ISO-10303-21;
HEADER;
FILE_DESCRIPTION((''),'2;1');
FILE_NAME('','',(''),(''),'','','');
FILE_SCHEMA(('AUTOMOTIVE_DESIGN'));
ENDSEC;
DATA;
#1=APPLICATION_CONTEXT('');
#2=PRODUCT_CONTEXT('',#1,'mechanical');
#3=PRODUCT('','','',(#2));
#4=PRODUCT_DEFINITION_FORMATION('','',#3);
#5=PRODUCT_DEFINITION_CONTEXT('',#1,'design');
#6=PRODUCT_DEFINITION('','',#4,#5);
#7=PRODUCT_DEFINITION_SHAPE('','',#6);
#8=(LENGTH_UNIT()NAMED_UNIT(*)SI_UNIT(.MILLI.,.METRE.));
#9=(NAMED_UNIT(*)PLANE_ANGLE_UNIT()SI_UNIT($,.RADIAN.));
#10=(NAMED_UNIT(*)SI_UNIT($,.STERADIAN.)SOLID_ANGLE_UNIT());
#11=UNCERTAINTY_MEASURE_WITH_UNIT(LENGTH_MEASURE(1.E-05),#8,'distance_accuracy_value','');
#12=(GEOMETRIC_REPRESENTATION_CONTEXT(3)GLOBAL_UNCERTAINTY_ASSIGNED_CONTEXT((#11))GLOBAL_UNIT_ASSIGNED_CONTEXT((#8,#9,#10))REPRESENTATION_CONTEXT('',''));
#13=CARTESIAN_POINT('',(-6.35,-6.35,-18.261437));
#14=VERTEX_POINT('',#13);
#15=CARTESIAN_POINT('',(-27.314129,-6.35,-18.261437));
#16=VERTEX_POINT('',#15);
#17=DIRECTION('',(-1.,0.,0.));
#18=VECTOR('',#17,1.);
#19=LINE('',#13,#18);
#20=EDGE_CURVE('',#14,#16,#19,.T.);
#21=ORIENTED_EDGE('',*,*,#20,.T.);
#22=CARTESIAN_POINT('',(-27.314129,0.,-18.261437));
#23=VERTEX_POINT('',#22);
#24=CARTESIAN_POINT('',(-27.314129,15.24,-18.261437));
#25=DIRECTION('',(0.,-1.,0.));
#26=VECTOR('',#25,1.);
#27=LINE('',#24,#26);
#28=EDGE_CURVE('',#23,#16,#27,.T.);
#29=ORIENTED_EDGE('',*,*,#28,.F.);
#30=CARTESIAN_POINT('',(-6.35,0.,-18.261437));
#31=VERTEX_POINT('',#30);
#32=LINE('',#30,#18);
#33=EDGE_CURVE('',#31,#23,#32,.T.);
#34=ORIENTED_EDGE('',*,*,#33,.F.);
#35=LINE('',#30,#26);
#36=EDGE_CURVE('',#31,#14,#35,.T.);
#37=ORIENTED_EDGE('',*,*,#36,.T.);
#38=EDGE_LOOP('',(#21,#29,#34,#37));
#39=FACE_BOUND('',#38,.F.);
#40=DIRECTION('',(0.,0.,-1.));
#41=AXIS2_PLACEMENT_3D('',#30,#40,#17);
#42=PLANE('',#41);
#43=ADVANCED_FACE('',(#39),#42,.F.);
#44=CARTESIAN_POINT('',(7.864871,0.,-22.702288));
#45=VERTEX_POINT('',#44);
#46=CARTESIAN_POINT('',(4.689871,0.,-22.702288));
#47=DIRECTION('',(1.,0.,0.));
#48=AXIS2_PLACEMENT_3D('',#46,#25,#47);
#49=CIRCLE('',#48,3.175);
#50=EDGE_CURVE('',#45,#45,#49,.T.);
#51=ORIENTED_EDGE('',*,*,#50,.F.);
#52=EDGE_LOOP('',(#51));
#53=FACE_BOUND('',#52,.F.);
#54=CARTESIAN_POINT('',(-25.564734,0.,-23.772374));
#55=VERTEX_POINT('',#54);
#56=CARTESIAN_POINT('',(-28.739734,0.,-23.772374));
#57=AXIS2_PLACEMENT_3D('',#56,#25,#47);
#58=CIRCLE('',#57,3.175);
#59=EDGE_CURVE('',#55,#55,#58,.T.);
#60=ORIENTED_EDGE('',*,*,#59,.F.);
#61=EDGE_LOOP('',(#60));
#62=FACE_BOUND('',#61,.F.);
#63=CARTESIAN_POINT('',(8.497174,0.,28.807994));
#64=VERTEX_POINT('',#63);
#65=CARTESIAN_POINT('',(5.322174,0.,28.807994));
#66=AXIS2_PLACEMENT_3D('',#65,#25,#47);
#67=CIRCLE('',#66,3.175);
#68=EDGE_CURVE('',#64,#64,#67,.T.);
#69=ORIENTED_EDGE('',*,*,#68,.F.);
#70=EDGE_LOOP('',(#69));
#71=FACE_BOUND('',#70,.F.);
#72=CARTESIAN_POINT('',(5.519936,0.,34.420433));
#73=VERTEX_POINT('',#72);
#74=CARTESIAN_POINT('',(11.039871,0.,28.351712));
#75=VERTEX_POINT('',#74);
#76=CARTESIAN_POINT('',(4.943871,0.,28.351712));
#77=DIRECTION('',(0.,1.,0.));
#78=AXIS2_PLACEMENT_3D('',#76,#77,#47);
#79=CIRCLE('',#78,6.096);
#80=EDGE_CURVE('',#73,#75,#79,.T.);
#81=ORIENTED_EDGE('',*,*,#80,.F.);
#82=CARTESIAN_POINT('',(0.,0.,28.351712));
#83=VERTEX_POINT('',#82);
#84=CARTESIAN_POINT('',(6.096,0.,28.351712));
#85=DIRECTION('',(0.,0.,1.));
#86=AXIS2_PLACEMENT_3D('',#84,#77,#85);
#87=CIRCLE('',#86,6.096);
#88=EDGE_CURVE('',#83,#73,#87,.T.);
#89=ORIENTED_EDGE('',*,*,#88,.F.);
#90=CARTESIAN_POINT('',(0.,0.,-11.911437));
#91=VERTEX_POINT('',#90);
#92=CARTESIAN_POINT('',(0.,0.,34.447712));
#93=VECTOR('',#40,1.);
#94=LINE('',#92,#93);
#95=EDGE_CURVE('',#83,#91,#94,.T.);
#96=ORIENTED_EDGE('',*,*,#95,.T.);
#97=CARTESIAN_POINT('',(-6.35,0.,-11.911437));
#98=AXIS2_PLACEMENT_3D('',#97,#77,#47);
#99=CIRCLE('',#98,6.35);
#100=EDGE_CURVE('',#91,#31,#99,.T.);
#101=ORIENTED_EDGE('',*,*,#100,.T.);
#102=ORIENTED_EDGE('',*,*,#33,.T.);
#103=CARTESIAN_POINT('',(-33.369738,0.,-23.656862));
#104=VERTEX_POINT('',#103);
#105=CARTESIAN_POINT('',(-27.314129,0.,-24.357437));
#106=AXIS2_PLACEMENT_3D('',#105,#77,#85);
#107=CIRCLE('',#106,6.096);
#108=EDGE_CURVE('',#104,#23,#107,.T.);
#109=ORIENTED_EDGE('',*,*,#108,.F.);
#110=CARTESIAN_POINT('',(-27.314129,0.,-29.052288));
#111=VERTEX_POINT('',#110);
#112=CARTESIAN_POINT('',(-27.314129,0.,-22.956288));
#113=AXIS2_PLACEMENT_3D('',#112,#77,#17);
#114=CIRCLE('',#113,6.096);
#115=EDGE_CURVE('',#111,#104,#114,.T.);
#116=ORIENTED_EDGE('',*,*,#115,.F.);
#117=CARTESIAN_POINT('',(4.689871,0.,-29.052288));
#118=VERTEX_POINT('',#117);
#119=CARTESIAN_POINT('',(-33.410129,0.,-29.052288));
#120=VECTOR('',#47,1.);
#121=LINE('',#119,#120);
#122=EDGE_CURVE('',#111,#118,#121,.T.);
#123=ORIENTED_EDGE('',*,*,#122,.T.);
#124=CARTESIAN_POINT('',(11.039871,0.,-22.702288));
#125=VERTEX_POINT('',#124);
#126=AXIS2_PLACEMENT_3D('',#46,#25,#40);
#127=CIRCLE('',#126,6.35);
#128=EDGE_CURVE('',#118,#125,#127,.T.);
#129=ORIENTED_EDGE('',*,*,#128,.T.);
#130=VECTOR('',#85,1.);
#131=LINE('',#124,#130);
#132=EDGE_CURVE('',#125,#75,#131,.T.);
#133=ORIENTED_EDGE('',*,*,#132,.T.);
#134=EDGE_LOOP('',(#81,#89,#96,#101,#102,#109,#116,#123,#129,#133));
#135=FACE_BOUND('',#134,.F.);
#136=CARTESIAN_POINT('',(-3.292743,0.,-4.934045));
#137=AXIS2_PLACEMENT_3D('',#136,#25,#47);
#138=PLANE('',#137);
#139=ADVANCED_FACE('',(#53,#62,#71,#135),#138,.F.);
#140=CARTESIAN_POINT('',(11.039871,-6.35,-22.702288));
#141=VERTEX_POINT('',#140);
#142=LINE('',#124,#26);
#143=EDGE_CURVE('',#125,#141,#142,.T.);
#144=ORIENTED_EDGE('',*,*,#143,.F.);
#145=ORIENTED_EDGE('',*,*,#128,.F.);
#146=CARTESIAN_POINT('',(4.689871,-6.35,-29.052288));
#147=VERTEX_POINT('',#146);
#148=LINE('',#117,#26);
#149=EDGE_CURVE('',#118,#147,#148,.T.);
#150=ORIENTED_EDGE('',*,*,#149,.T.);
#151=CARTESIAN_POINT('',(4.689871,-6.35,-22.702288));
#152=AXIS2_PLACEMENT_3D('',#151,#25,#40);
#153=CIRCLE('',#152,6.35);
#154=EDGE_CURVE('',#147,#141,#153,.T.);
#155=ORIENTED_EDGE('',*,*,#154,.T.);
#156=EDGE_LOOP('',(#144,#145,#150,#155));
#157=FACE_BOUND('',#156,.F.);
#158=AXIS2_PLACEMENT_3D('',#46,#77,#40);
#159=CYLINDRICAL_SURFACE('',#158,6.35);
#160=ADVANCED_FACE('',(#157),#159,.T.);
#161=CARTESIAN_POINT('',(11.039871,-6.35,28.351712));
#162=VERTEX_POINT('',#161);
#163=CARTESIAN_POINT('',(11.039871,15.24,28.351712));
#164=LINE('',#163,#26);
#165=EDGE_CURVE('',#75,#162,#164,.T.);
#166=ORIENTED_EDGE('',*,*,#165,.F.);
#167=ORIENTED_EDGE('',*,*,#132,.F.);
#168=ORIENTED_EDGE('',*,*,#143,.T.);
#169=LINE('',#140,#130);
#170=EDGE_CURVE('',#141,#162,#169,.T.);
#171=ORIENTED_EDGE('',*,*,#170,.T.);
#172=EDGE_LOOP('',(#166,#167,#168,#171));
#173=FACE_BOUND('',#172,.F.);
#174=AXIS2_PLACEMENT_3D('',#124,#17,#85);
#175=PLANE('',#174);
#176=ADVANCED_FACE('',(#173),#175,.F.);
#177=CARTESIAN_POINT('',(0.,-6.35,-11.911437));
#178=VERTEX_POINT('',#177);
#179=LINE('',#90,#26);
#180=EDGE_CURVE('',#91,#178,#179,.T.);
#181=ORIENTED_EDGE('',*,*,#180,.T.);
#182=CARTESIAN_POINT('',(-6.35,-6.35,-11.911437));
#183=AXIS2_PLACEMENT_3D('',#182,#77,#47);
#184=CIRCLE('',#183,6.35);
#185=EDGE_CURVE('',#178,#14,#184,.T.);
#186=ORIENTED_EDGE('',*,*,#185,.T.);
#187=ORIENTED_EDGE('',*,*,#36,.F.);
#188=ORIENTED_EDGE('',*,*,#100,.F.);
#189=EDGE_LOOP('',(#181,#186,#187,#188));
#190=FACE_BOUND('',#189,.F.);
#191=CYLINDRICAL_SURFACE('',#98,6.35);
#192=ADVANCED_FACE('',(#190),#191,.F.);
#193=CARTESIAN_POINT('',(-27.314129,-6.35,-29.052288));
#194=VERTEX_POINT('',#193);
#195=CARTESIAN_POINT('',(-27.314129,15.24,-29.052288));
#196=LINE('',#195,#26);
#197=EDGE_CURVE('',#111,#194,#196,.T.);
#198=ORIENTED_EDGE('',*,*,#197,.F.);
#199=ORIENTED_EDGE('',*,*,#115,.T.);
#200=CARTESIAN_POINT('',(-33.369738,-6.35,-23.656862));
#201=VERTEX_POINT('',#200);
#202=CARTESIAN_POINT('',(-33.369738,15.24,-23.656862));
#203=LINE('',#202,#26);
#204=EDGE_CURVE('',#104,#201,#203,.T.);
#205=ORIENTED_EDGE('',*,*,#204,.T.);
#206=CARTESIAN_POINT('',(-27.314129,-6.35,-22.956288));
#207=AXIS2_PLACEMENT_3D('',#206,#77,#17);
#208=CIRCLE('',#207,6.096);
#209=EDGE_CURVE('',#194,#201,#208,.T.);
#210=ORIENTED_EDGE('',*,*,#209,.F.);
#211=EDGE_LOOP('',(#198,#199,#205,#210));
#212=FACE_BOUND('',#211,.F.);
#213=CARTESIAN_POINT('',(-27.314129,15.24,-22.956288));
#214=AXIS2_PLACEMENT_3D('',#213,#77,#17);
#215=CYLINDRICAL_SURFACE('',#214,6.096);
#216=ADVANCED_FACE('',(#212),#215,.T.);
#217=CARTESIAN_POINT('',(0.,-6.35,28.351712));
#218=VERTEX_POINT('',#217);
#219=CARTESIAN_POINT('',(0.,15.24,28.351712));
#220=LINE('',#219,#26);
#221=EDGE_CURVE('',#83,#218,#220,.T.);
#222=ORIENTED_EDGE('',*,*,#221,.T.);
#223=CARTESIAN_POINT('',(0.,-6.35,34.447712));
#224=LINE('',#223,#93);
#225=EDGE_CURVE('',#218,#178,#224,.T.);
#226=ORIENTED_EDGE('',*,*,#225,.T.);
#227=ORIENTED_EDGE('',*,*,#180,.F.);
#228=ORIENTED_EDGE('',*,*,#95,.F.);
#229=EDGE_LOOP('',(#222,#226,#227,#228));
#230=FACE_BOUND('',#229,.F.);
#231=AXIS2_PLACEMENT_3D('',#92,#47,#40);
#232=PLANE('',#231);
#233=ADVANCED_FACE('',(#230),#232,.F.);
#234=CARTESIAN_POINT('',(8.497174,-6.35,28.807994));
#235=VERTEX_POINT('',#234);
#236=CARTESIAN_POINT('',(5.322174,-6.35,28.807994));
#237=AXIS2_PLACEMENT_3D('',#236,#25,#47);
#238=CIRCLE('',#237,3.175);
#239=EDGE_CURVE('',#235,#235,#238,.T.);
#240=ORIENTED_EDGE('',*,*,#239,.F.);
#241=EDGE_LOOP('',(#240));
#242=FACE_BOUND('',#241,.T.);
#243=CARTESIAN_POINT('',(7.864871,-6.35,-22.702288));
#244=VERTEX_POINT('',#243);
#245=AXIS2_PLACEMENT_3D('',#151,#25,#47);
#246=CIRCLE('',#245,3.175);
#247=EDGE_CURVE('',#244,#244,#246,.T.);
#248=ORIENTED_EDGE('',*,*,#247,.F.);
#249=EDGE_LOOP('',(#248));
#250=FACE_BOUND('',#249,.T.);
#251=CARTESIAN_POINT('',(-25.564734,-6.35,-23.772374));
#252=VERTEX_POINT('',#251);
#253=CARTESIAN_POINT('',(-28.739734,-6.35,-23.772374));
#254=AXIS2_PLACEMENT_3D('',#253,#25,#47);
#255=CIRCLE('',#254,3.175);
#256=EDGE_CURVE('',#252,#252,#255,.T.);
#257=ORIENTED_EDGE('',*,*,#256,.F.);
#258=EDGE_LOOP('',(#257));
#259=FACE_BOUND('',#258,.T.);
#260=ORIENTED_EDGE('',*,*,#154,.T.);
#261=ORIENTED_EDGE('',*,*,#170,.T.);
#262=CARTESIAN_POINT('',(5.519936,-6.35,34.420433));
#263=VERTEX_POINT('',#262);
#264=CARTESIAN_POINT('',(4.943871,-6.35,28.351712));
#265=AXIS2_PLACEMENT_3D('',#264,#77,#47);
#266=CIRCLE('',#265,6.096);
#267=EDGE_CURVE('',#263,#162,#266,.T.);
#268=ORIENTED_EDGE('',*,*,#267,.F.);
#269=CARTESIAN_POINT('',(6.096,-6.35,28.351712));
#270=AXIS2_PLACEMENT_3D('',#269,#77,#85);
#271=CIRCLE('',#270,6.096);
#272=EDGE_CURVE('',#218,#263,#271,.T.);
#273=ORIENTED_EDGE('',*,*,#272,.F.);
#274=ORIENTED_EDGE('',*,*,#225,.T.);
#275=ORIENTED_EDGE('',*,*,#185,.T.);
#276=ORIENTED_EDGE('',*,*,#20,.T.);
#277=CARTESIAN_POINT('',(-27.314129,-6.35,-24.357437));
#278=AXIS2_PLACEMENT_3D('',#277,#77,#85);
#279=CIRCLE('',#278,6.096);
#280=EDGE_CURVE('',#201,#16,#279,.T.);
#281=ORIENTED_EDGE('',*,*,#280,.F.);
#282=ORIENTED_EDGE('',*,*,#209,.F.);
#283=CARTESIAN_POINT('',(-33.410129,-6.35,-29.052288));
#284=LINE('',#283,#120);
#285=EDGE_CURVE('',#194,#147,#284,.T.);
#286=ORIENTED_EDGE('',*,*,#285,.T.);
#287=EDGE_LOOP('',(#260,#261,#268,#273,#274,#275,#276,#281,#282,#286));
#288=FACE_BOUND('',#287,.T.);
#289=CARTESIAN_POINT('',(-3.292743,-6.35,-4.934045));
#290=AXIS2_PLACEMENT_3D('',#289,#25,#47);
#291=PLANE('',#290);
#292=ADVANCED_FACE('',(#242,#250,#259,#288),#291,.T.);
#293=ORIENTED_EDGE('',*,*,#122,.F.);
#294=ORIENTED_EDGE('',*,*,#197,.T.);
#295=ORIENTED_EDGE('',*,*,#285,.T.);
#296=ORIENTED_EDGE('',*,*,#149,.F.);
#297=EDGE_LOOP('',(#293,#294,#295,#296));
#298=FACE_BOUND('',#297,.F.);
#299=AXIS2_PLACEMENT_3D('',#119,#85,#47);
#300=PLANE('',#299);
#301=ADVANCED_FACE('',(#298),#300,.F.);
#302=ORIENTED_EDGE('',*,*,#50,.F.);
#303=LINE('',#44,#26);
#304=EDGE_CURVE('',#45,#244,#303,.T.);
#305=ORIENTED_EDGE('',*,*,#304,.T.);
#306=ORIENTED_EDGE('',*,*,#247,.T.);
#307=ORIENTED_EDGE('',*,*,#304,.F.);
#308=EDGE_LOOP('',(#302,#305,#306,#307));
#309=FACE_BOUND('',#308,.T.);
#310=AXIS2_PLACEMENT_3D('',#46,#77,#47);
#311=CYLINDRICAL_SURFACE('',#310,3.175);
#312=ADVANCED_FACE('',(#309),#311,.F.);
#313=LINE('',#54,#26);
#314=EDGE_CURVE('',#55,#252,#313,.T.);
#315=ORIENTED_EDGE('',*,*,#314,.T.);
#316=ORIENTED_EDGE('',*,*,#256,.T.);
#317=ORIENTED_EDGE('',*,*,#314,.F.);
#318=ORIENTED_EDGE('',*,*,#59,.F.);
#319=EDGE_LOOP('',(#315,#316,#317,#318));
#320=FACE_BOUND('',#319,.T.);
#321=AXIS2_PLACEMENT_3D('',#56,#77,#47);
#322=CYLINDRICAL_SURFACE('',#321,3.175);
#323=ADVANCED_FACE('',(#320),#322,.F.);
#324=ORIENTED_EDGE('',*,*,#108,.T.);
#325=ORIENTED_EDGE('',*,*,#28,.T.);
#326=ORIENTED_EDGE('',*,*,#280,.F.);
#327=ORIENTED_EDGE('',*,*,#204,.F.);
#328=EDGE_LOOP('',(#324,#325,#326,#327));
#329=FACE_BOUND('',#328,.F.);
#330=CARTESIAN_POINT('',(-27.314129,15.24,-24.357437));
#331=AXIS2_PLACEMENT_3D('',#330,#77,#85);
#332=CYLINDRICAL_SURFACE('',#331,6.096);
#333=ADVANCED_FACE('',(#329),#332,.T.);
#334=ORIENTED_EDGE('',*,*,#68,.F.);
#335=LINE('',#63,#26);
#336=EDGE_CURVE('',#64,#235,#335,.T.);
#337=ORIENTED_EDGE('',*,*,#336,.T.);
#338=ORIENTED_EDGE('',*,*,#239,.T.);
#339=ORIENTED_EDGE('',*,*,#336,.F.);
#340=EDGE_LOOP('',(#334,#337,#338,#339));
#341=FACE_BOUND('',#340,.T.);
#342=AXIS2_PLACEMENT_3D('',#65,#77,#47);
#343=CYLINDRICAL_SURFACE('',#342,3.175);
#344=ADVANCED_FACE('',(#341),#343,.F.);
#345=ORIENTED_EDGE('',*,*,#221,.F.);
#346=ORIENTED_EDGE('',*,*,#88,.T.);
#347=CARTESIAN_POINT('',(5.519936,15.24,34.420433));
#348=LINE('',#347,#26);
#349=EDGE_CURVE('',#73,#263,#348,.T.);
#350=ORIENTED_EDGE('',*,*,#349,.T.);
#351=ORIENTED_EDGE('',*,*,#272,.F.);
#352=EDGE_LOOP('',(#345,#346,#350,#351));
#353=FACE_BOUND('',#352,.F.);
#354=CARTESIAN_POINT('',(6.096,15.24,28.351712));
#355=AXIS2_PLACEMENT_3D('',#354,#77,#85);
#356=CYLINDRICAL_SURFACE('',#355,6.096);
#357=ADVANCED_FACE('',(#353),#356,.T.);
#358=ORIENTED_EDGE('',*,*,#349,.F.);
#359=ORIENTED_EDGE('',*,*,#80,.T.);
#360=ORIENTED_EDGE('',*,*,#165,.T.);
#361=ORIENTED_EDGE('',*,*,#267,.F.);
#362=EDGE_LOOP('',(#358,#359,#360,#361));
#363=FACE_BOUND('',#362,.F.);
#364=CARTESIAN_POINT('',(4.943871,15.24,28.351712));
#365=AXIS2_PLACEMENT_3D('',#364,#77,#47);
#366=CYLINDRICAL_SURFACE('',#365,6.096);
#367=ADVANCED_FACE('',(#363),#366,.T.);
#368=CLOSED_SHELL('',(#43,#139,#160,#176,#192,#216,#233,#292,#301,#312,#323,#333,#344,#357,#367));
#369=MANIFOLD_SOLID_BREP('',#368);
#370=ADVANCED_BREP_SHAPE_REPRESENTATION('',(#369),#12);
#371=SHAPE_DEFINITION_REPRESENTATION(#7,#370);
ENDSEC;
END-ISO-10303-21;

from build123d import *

# Parameters (mm, degrees)
F0_R        = 3.175
F1_DEPTH    = 6.35
F2_T1_DEPTH = 36.83
F3_T1_DEPTH = 36.83


# Not quite as in the source:
# - a fillet or chamfer that OpenCascade refuses, or shapes differently, is made with other operations: its cross-section is extruded or revolved along the edge and cut away or added


with BuildPart() as f1:
    # F0 (on Front) → F1 (new body)
    with BuildSketch(Plane.XZ):
        with BuildLine():
            Line((11.0398714598, -22.7022875817), (11.0398714598, 34.4477124183))
            Line((11.0398714598, 34.4477124183), (0, 34.4477124183))
            Line((0, 34.4477124183), (0, -11.9114368191))
            ThreePointArc((0, -11.9114368191), (-1.8598719395, -16.4015648796), (-6.35, -18.2614368191))
            Line((-6.35, -18.2614368191), (-33.4101285402, -18.2614368191))
            Line((-33.4101285402, -18.2614368191), (-33.4101285402, -29.0522875817))
            Line((-33.4101285402, -29.0522875817), (4.6898714598, -29.0522875817))
            ThreePointArc((4.6898714598, -29.0522875817), (9.1799995204, -27.1924156422), (11.0398714598, -22.7022875817))
        make_face()
        with Locations((-28.7397336215, -23.7723737955)):
            Circle(F0_R, mode=Mode.SUBTRACT)
        with Locations((4.6898714598, -22.7022875817)):
            Circle(F0_R, mode=Mode.SUBTRACT)
        with Locations((5.3221737035, 28.8079940212)):
            Circle(F0_R, mode=Mode.SUBTRACT)
    extrude(amount=F1_DEPTH)

    # F2: fillet of radius 6.096 on 2 edges, made by hand

    # F2_s2 → F2_t1 (cut)
    with BuildSketch(Plane.XZ.offset(-15.24)):
        with BuildLine():
            ThreePointArc((-27.3141285402, -18.2614368191), (-31.6246514783, -20.046913881), (-33.4101285402, -24.3574368191))
            Line((-33.4101285402, -24.3574368191), (-33.4101285402, -18.2614368191))
            Line((-33.4101285402, -18.2614368191), (-27.3141285402, -18.2614368191))
        make_face()
        with BuildLine():
            ThreePointArc((-33.4101285402, -22.9562875817), (-31.6246514783, -27.2668105198), (-27.3141285402, -29.0522875817))
            Line((-27.3141285402, -29.0522875817), (-33.4101285402, -29.0522875817))
            Line((-33.4101285402, -29.0522875817), (-33.4101285402, -22.9562875817))
        make_face()
    extrude(amount=F2_T1_DEPTH, mode=Mode.SUBTRACT)

    # F3: fillet of radius 6.096 on 2 edges, made by hand

    # F3_s2 → F3_t1 (cut)
    with BuildSketch(Plane.XZ.offset(-15.24)):
        with BuildLine():
            ThreePointArc((6.096, 34.4477124183), (1.7854770619, 32.6622353564), (0, 28.3517124183))
            Line((0, 28.3517124183), (0, 34.4477124183))
            Line((0, 34.4477124183), (6.096, 34.4477124183))
        make_face()
        with BuildLine():
            ThreePointArc((11.0398714598, 28.3517124183), (9.2543943979, 32.6622353564), (4.9438714598, 34.4477124183))
            Line((4.9438714598, 34.4477124183), (11.0398714598, 34.4477124183))
            Line((11.0398714598, 34.4477124183), (11.0398714598, 28.3517124183))
        make_face()
    extrude(amount=F3_T1_DEPTH, mode=Mode.SUBTRACT)


solid = f1.part
